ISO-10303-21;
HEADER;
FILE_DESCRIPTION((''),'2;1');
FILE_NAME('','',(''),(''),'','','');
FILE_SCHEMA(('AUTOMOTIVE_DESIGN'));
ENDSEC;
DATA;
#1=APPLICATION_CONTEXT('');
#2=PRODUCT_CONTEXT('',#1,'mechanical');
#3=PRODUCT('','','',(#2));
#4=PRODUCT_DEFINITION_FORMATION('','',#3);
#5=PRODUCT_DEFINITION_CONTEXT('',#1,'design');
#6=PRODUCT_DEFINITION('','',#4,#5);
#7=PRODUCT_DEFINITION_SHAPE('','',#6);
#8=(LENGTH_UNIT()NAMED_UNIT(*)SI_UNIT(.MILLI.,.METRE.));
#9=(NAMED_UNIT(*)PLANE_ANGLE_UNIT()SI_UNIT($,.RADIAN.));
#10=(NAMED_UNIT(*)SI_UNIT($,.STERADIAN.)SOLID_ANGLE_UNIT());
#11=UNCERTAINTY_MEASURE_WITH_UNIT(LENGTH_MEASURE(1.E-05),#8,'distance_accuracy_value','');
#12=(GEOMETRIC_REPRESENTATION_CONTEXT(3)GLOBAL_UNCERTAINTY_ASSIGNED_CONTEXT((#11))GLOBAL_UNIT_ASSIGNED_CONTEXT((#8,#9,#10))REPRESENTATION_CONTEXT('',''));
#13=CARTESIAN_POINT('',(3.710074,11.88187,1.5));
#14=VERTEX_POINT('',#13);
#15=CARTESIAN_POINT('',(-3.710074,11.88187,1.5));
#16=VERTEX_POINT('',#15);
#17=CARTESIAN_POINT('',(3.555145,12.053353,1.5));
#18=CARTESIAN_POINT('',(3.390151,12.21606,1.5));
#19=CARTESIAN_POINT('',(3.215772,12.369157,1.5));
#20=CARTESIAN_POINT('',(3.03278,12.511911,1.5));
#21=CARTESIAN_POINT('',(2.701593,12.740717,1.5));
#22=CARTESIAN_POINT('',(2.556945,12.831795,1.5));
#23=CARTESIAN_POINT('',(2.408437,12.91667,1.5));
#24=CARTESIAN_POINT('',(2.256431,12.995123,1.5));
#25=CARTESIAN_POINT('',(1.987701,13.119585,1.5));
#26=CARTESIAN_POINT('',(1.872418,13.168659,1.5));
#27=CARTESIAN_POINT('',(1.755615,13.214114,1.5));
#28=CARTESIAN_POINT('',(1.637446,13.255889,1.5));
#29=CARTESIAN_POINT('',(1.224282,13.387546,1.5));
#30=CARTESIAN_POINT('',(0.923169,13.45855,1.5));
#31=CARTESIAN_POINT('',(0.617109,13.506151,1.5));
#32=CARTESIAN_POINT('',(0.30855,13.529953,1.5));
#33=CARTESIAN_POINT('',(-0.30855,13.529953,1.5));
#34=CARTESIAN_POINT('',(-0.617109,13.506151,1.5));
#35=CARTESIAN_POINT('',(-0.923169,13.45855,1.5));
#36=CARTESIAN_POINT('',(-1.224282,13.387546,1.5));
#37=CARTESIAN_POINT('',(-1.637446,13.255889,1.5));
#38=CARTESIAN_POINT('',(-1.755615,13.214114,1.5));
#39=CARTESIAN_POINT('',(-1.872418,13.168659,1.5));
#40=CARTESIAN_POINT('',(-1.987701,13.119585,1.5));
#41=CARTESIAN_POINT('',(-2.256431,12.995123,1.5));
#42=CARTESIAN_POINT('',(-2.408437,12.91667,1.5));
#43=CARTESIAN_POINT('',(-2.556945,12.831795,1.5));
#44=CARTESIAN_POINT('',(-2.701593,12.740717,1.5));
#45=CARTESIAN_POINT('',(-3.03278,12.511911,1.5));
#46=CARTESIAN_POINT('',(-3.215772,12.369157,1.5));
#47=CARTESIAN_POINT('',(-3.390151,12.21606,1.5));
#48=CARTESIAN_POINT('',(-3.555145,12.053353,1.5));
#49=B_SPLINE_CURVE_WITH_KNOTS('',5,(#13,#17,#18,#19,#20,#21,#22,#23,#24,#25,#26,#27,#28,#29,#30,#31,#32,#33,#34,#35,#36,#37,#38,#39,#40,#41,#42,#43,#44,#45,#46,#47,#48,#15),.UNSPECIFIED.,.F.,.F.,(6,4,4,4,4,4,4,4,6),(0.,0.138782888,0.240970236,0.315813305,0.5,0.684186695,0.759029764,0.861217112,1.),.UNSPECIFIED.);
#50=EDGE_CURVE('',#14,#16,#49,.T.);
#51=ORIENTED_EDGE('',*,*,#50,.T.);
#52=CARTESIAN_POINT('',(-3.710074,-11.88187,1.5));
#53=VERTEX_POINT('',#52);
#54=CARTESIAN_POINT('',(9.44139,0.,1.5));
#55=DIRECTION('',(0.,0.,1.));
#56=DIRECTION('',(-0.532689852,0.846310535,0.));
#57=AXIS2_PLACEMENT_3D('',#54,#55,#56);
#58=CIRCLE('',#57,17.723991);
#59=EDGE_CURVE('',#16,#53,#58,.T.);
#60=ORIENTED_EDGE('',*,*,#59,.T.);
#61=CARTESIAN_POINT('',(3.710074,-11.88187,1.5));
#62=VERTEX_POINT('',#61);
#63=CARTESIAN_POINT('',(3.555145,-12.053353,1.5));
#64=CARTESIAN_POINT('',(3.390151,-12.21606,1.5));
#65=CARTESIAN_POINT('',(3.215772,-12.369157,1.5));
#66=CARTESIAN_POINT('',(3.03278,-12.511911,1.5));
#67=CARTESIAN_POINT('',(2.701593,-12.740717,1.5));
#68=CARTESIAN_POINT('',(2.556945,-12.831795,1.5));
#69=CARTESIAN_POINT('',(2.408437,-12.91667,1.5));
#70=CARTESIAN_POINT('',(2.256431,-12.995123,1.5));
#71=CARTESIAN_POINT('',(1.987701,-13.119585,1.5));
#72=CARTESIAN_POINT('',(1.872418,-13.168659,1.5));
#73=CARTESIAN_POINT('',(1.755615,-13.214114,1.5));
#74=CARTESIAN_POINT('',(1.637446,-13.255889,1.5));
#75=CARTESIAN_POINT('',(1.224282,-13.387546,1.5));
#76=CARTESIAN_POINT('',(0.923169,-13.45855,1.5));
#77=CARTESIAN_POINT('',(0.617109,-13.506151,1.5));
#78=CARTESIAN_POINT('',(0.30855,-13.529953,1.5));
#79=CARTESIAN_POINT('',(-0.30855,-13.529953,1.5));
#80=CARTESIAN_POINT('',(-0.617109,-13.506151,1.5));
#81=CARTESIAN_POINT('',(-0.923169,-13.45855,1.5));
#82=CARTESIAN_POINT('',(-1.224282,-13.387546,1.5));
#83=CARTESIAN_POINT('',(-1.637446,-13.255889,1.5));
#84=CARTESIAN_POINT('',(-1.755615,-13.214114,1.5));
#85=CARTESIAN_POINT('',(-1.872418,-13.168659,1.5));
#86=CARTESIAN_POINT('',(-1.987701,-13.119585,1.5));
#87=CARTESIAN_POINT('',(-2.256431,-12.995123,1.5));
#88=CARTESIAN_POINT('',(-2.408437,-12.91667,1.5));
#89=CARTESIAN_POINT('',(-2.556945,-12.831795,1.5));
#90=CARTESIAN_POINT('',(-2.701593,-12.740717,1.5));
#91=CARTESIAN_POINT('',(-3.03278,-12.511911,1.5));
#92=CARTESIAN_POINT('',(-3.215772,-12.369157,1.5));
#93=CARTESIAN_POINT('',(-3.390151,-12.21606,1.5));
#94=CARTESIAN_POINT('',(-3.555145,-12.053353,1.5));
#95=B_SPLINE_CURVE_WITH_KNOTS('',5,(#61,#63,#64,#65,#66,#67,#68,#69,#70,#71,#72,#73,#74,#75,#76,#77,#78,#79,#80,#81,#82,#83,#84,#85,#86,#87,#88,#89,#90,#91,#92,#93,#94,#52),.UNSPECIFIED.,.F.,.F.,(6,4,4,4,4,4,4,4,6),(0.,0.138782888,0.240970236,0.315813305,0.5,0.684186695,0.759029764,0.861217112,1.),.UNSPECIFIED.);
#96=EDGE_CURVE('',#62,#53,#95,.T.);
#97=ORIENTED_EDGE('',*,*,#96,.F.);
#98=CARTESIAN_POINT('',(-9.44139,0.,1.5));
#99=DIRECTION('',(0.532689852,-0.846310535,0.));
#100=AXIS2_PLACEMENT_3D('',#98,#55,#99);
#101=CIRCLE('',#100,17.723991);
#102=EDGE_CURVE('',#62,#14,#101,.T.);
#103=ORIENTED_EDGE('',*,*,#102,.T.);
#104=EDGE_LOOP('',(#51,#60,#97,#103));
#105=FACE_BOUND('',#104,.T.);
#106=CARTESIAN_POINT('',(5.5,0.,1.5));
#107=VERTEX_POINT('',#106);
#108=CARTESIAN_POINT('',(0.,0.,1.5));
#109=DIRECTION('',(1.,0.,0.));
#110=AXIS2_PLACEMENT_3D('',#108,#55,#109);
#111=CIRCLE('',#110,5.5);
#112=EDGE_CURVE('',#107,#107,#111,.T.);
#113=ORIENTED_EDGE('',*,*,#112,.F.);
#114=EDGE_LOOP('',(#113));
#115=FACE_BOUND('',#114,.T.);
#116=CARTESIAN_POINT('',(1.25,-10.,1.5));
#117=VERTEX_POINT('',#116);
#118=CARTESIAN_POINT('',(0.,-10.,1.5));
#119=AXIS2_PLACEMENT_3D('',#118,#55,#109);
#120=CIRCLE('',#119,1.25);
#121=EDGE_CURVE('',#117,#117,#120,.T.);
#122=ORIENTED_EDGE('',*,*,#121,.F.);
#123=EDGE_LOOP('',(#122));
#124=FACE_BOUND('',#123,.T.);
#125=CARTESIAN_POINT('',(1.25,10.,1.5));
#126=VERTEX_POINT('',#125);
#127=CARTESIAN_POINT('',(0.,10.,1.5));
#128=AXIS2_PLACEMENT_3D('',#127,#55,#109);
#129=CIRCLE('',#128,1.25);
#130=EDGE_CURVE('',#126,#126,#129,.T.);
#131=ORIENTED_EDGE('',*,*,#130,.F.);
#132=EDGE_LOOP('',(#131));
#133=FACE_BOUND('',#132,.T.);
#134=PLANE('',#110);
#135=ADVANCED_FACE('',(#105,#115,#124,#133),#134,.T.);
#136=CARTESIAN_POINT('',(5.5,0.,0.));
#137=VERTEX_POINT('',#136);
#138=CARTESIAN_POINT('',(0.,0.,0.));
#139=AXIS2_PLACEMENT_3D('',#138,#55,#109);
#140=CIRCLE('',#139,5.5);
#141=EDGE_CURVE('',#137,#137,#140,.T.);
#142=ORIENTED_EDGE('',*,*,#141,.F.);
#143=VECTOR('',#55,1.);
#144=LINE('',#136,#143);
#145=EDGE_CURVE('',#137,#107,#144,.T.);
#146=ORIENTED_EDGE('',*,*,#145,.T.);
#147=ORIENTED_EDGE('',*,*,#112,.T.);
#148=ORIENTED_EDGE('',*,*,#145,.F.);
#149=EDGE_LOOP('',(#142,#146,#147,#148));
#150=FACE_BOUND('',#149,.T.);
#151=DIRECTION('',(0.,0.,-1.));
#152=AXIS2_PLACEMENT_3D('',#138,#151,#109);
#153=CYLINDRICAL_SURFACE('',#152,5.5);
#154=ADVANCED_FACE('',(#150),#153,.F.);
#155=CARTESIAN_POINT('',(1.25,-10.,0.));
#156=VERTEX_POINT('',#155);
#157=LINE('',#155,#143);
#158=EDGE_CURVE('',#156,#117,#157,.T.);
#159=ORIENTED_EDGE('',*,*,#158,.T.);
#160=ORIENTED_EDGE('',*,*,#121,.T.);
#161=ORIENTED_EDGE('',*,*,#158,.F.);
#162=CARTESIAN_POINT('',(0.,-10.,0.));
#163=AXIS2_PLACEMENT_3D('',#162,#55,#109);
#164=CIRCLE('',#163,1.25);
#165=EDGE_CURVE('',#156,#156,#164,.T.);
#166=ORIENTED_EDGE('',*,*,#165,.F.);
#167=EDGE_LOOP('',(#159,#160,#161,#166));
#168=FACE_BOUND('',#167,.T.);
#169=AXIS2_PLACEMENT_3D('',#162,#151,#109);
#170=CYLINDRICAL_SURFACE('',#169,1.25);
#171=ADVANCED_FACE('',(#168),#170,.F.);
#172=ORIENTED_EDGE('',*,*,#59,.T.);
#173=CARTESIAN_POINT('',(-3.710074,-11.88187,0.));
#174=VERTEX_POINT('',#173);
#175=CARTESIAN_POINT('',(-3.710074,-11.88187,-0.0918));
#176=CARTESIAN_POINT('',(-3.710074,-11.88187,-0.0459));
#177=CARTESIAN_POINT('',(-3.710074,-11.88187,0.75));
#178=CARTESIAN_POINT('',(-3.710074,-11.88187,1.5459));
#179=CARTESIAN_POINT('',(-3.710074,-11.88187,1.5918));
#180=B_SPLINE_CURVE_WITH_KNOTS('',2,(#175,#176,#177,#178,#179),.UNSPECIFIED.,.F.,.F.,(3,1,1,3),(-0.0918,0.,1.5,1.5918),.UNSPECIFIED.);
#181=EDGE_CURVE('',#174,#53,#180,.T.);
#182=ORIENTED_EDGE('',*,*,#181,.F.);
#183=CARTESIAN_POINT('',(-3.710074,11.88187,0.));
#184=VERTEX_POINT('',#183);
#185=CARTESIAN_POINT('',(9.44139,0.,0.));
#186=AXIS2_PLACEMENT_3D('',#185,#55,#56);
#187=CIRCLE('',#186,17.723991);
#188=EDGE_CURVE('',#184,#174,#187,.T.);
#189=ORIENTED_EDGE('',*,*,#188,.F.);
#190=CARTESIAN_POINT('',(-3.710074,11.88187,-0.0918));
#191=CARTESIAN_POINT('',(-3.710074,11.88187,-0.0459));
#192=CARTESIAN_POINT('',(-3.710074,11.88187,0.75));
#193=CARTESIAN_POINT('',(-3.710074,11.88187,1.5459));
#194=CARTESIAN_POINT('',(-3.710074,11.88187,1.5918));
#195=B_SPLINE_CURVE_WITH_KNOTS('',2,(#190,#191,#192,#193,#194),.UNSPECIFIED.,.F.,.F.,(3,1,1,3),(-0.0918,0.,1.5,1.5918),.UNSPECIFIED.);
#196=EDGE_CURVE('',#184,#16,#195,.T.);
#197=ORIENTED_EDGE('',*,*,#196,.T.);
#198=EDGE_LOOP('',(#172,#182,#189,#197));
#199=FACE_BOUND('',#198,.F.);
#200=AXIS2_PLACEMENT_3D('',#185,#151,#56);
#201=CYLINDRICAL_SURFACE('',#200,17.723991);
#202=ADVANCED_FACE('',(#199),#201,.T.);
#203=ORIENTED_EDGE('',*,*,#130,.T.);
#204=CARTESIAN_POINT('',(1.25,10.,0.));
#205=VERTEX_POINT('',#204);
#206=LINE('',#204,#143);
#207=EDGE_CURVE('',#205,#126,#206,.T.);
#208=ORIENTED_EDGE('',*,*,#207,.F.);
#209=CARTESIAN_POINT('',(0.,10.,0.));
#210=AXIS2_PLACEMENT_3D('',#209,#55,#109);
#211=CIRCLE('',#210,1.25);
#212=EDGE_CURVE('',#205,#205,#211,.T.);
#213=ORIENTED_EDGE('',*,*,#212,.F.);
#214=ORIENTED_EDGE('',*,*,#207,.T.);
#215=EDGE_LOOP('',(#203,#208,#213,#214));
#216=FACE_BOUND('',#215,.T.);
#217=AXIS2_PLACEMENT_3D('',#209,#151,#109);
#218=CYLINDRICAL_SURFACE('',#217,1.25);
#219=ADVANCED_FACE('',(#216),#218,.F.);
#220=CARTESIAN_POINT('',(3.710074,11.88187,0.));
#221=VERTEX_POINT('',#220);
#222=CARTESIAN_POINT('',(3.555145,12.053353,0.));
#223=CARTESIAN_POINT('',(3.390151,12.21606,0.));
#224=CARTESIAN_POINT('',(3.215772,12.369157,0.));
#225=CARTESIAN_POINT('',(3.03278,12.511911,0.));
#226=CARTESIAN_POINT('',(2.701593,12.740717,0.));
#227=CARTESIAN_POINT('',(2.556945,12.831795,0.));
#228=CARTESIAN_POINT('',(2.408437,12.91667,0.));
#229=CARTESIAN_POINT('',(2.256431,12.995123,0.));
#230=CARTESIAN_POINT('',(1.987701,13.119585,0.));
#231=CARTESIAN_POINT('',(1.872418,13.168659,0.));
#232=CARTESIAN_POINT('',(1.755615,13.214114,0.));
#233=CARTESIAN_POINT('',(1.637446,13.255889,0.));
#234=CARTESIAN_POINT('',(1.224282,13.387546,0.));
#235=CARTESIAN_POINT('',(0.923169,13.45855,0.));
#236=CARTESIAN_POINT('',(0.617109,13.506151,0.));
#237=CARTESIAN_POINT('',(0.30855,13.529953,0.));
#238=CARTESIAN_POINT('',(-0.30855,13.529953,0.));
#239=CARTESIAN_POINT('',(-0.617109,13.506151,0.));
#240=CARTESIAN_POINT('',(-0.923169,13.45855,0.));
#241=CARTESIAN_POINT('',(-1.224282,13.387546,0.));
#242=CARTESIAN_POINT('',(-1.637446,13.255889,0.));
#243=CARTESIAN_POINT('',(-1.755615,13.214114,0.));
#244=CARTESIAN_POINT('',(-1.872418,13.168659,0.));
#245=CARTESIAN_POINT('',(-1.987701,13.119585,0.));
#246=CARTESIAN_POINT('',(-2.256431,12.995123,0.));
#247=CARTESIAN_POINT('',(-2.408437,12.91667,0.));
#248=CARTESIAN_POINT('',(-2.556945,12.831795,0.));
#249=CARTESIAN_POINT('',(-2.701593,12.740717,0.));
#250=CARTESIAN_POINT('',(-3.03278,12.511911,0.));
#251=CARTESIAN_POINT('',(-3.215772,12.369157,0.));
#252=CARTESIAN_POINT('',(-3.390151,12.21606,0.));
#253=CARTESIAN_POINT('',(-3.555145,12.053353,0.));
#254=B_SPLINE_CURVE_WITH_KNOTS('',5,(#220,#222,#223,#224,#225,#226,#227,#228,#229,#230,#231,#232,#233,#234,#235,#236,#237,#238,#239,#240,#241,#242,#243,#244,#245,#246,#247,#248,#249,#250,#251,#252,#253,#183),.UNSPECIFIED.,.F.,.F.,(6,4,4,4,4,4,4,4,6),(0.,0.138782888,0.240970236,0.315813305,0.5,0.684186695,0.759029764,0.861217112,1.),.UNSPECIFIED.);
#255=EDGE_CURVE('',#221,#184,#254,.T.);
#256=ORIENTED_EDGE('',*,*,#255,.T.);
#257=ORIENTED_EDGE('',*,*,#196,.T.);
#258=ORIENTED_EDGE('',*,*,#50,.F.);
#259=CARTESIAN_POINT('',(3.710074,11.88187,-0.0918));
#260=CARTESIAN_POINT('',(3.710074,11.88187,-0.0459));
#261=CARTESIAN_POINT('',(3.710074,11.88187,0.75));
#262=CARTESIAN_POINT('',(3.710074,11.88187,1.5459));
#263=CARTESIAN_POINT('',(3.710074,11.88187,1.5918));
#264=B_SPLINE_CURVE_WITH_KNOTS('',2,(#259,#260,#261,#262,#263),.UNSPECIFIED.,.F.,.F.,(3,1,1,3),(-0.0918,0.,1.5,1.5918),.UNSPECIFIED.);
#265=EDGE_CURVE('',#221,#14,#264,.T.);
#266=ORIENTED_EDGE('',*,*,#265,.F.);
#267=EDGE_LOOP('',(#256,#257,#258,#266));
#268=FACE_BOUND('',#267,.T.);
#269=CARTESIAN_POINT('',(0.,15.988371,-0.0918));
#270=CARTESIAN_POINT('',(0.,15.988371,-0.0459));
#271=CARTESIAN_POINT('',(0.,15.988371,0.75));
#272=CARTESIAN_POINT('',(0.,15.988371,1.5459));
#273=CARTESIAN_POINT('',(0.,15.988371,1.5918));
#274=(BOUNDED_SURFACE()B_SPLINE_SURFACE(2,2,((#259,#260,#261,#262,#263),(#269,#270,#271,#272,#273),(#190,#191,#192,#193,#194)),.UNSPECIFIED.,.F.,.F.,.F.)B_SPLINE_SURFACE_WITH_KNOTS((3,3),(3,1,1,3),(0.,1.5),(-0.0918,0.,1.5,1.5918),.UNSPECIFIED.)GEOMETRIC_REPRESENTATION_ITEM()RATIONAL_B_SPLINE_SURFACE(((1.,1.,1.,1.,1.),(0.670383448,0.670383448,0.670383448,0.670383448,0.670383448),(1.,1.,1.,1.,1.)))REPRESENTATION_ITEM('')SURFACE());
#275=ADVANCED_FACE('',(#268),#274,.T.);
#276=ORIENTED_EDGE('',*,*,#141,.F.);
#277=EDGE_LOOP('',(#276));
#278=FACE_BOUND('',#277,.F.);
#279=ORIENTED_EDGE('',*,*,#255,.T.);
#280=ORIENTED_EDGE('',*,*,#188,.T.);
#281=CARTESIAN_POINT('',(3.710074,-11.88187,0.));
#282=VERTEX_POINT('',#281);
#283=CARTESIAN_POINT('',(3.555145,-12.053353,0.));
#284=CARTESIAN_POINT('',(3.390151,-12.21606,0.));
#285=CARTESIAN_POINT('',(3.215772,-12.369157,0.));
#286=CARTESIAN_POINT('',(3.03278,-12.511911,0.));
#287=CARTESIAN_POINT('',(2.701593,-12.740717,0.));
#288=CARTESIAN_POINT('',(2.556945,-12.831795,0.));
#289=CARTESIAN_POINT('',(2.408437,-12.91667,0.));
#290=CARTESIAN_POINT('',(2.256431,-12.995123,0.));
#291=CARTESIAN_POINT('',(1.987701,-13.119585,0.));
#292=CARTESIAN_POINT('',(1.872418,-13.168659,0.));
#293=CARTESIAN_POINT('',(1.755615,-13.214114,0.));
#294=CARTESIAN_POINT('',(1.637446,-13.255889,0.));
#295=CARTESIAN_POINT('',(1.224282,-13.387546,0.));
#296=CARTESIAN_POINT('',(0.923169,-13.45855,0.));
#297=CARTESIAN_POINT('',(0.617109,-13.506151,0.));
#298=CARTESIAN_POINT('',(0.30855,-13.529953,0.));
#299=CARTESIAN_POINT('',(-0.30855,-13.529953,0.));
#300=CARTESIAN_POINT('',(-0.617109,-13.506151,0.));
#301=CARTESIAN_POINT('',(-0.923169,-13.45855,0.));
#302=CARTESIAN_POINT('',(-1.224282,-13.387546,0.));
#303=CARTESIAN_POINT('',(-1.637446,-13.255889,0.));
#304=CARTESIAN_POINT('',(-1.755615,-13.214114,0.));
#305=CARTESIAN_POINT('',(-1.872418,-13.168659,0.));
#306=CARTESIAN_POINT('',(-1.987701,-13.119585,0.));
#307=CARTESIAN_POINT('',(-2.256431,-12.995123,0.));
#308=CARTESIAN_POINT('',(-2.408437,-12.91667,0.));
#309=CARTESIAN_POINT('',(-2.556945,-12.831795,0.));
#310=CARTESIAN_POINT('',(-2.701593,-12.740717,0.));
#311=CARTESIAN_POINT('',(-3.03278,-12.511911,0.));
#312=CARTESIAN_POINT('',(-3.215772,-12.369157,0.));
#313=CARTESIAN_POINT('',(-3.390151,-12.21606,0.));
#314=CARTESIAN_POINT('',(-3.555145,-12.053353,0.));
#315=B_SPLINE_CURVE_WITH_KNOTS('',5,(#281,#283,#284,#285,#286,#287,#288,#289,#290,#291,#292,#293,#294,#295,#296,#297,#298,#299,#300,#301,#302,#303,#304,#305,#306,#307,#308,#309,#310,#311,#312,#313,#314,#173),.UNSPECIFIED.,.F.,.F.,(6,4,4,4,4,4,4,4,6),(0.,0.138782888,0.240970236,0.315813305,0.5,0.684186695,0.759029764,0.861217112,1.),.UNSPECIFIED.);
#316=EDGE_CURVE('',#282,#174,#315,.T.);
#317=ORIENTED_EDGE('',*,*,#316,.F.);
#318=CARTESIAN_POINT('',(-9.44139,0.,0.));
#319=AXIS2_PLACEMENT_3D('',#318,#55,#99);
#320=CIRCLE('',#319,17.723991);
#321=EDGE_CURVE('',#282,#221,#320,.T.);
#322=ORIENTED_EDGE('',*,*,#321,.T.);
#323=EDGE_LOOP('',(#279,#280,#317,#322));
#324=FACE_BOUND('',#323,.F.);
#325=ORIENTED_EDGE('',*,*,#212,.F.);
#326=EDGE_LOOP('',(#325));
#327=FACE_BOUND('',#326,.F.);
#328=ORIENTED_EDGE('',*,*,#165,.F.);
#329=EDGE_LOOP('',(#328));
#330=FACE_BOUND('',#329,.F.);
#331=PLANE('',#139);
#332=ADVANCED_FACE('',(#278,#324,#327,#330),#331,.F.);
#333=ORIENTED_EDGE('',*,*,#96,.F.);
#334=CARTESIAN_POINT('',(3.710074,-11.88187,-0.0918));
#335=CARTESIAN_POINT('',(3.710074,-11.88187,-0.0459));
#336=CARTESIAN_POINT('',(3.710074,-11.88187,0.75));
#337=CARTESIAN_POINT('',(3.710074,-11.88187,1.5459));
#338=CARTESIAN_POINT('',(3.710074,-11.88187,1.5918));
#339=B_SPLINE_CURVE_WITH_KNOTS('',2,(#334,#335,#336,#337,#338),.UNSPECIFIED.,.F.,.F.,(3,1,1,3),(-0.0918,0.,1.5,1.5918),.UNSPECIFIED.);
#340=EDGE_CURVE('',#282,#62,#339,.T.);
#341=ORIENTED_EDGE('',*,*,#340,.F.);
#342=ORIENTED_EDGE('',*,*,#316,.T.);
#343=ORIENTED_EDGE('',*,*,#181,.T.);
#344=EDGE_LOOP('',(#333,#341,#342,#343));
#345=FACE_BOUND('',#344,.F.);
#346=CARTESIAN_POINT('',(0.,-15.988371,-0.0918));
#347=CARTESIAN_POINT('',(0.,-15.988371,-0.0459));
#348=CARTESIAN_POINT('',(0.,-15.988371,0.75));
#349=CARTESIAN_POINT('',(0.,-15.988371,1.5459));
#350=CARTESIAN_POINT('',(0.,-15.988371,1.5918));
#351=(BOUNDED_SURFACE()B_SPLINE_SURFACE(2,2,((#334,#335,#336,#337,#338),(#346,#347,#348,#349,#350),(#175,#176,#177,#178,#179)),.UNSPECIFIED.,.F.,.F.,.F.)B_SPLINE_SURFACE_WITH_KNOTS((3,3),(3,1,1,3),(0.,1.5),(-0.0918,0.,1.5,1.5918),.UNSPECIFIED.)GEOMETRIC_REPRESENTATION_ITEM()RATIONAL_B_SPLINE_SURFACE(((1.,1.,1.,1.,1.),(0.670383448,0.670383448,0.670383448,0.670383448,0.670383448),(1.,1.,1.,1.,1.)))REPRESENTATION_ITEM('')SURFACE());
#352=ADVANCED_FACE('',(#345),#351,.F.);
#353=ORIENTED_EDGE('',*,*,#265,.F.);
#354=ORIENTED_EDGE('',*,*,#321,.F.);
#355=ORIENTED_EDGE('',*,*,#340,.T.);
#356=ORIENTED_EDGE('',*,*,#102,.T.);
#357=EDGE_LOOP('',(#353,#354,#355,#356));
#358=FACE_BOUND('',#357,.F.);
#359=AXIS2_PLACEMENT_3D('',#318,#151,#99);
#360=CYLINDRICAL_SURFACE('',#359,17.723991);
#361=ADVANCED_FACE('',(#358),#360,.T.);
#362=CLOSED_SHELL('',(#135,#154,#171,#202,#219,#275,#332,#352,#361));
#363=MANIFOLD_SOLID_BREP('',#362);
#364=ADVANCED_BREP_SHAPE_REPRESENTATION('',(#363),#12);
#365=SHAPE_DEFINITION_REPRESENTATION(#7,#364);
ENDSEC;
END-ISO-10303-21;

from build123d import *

# Parameters (mm, degrees)
F0_R     = 1.25
F0_R_2   = 5.5
F1_DEPTH = 1.5
F2_R     = 5


with BuildPart() as f1:
    # F0 (on Top) → F1 (new body)
    with BuildSketch(Plane.XY):
        with BuildLine():
            ThreePointArc((0, -15), (8.2826006835, 0), (0, 15))
            ThreePointArc((0, 15), (-8.2826006835, 0), (0, -15))
        make_face()
        with Locations((0, -10)):
            Circle(F0_R, mode=Mode.SUBTRACT)
        Circle(F0_R_2, mode=Mode.SUBTRACT)
        with Locations((0, 10)):
            Circle(F0_R, mode=Mode.SUBTRACT)
    extrude(amount=F1_DEPTH)

    # F2
    f2_edges = [f1.edges().sort_by_distance(p)[0] for p in [
        (0, -15, 0.75),
        (0, 15, 0.75),
    ]]
    fillet(f2_edges, radius=F2_R)


solid = f1.part
